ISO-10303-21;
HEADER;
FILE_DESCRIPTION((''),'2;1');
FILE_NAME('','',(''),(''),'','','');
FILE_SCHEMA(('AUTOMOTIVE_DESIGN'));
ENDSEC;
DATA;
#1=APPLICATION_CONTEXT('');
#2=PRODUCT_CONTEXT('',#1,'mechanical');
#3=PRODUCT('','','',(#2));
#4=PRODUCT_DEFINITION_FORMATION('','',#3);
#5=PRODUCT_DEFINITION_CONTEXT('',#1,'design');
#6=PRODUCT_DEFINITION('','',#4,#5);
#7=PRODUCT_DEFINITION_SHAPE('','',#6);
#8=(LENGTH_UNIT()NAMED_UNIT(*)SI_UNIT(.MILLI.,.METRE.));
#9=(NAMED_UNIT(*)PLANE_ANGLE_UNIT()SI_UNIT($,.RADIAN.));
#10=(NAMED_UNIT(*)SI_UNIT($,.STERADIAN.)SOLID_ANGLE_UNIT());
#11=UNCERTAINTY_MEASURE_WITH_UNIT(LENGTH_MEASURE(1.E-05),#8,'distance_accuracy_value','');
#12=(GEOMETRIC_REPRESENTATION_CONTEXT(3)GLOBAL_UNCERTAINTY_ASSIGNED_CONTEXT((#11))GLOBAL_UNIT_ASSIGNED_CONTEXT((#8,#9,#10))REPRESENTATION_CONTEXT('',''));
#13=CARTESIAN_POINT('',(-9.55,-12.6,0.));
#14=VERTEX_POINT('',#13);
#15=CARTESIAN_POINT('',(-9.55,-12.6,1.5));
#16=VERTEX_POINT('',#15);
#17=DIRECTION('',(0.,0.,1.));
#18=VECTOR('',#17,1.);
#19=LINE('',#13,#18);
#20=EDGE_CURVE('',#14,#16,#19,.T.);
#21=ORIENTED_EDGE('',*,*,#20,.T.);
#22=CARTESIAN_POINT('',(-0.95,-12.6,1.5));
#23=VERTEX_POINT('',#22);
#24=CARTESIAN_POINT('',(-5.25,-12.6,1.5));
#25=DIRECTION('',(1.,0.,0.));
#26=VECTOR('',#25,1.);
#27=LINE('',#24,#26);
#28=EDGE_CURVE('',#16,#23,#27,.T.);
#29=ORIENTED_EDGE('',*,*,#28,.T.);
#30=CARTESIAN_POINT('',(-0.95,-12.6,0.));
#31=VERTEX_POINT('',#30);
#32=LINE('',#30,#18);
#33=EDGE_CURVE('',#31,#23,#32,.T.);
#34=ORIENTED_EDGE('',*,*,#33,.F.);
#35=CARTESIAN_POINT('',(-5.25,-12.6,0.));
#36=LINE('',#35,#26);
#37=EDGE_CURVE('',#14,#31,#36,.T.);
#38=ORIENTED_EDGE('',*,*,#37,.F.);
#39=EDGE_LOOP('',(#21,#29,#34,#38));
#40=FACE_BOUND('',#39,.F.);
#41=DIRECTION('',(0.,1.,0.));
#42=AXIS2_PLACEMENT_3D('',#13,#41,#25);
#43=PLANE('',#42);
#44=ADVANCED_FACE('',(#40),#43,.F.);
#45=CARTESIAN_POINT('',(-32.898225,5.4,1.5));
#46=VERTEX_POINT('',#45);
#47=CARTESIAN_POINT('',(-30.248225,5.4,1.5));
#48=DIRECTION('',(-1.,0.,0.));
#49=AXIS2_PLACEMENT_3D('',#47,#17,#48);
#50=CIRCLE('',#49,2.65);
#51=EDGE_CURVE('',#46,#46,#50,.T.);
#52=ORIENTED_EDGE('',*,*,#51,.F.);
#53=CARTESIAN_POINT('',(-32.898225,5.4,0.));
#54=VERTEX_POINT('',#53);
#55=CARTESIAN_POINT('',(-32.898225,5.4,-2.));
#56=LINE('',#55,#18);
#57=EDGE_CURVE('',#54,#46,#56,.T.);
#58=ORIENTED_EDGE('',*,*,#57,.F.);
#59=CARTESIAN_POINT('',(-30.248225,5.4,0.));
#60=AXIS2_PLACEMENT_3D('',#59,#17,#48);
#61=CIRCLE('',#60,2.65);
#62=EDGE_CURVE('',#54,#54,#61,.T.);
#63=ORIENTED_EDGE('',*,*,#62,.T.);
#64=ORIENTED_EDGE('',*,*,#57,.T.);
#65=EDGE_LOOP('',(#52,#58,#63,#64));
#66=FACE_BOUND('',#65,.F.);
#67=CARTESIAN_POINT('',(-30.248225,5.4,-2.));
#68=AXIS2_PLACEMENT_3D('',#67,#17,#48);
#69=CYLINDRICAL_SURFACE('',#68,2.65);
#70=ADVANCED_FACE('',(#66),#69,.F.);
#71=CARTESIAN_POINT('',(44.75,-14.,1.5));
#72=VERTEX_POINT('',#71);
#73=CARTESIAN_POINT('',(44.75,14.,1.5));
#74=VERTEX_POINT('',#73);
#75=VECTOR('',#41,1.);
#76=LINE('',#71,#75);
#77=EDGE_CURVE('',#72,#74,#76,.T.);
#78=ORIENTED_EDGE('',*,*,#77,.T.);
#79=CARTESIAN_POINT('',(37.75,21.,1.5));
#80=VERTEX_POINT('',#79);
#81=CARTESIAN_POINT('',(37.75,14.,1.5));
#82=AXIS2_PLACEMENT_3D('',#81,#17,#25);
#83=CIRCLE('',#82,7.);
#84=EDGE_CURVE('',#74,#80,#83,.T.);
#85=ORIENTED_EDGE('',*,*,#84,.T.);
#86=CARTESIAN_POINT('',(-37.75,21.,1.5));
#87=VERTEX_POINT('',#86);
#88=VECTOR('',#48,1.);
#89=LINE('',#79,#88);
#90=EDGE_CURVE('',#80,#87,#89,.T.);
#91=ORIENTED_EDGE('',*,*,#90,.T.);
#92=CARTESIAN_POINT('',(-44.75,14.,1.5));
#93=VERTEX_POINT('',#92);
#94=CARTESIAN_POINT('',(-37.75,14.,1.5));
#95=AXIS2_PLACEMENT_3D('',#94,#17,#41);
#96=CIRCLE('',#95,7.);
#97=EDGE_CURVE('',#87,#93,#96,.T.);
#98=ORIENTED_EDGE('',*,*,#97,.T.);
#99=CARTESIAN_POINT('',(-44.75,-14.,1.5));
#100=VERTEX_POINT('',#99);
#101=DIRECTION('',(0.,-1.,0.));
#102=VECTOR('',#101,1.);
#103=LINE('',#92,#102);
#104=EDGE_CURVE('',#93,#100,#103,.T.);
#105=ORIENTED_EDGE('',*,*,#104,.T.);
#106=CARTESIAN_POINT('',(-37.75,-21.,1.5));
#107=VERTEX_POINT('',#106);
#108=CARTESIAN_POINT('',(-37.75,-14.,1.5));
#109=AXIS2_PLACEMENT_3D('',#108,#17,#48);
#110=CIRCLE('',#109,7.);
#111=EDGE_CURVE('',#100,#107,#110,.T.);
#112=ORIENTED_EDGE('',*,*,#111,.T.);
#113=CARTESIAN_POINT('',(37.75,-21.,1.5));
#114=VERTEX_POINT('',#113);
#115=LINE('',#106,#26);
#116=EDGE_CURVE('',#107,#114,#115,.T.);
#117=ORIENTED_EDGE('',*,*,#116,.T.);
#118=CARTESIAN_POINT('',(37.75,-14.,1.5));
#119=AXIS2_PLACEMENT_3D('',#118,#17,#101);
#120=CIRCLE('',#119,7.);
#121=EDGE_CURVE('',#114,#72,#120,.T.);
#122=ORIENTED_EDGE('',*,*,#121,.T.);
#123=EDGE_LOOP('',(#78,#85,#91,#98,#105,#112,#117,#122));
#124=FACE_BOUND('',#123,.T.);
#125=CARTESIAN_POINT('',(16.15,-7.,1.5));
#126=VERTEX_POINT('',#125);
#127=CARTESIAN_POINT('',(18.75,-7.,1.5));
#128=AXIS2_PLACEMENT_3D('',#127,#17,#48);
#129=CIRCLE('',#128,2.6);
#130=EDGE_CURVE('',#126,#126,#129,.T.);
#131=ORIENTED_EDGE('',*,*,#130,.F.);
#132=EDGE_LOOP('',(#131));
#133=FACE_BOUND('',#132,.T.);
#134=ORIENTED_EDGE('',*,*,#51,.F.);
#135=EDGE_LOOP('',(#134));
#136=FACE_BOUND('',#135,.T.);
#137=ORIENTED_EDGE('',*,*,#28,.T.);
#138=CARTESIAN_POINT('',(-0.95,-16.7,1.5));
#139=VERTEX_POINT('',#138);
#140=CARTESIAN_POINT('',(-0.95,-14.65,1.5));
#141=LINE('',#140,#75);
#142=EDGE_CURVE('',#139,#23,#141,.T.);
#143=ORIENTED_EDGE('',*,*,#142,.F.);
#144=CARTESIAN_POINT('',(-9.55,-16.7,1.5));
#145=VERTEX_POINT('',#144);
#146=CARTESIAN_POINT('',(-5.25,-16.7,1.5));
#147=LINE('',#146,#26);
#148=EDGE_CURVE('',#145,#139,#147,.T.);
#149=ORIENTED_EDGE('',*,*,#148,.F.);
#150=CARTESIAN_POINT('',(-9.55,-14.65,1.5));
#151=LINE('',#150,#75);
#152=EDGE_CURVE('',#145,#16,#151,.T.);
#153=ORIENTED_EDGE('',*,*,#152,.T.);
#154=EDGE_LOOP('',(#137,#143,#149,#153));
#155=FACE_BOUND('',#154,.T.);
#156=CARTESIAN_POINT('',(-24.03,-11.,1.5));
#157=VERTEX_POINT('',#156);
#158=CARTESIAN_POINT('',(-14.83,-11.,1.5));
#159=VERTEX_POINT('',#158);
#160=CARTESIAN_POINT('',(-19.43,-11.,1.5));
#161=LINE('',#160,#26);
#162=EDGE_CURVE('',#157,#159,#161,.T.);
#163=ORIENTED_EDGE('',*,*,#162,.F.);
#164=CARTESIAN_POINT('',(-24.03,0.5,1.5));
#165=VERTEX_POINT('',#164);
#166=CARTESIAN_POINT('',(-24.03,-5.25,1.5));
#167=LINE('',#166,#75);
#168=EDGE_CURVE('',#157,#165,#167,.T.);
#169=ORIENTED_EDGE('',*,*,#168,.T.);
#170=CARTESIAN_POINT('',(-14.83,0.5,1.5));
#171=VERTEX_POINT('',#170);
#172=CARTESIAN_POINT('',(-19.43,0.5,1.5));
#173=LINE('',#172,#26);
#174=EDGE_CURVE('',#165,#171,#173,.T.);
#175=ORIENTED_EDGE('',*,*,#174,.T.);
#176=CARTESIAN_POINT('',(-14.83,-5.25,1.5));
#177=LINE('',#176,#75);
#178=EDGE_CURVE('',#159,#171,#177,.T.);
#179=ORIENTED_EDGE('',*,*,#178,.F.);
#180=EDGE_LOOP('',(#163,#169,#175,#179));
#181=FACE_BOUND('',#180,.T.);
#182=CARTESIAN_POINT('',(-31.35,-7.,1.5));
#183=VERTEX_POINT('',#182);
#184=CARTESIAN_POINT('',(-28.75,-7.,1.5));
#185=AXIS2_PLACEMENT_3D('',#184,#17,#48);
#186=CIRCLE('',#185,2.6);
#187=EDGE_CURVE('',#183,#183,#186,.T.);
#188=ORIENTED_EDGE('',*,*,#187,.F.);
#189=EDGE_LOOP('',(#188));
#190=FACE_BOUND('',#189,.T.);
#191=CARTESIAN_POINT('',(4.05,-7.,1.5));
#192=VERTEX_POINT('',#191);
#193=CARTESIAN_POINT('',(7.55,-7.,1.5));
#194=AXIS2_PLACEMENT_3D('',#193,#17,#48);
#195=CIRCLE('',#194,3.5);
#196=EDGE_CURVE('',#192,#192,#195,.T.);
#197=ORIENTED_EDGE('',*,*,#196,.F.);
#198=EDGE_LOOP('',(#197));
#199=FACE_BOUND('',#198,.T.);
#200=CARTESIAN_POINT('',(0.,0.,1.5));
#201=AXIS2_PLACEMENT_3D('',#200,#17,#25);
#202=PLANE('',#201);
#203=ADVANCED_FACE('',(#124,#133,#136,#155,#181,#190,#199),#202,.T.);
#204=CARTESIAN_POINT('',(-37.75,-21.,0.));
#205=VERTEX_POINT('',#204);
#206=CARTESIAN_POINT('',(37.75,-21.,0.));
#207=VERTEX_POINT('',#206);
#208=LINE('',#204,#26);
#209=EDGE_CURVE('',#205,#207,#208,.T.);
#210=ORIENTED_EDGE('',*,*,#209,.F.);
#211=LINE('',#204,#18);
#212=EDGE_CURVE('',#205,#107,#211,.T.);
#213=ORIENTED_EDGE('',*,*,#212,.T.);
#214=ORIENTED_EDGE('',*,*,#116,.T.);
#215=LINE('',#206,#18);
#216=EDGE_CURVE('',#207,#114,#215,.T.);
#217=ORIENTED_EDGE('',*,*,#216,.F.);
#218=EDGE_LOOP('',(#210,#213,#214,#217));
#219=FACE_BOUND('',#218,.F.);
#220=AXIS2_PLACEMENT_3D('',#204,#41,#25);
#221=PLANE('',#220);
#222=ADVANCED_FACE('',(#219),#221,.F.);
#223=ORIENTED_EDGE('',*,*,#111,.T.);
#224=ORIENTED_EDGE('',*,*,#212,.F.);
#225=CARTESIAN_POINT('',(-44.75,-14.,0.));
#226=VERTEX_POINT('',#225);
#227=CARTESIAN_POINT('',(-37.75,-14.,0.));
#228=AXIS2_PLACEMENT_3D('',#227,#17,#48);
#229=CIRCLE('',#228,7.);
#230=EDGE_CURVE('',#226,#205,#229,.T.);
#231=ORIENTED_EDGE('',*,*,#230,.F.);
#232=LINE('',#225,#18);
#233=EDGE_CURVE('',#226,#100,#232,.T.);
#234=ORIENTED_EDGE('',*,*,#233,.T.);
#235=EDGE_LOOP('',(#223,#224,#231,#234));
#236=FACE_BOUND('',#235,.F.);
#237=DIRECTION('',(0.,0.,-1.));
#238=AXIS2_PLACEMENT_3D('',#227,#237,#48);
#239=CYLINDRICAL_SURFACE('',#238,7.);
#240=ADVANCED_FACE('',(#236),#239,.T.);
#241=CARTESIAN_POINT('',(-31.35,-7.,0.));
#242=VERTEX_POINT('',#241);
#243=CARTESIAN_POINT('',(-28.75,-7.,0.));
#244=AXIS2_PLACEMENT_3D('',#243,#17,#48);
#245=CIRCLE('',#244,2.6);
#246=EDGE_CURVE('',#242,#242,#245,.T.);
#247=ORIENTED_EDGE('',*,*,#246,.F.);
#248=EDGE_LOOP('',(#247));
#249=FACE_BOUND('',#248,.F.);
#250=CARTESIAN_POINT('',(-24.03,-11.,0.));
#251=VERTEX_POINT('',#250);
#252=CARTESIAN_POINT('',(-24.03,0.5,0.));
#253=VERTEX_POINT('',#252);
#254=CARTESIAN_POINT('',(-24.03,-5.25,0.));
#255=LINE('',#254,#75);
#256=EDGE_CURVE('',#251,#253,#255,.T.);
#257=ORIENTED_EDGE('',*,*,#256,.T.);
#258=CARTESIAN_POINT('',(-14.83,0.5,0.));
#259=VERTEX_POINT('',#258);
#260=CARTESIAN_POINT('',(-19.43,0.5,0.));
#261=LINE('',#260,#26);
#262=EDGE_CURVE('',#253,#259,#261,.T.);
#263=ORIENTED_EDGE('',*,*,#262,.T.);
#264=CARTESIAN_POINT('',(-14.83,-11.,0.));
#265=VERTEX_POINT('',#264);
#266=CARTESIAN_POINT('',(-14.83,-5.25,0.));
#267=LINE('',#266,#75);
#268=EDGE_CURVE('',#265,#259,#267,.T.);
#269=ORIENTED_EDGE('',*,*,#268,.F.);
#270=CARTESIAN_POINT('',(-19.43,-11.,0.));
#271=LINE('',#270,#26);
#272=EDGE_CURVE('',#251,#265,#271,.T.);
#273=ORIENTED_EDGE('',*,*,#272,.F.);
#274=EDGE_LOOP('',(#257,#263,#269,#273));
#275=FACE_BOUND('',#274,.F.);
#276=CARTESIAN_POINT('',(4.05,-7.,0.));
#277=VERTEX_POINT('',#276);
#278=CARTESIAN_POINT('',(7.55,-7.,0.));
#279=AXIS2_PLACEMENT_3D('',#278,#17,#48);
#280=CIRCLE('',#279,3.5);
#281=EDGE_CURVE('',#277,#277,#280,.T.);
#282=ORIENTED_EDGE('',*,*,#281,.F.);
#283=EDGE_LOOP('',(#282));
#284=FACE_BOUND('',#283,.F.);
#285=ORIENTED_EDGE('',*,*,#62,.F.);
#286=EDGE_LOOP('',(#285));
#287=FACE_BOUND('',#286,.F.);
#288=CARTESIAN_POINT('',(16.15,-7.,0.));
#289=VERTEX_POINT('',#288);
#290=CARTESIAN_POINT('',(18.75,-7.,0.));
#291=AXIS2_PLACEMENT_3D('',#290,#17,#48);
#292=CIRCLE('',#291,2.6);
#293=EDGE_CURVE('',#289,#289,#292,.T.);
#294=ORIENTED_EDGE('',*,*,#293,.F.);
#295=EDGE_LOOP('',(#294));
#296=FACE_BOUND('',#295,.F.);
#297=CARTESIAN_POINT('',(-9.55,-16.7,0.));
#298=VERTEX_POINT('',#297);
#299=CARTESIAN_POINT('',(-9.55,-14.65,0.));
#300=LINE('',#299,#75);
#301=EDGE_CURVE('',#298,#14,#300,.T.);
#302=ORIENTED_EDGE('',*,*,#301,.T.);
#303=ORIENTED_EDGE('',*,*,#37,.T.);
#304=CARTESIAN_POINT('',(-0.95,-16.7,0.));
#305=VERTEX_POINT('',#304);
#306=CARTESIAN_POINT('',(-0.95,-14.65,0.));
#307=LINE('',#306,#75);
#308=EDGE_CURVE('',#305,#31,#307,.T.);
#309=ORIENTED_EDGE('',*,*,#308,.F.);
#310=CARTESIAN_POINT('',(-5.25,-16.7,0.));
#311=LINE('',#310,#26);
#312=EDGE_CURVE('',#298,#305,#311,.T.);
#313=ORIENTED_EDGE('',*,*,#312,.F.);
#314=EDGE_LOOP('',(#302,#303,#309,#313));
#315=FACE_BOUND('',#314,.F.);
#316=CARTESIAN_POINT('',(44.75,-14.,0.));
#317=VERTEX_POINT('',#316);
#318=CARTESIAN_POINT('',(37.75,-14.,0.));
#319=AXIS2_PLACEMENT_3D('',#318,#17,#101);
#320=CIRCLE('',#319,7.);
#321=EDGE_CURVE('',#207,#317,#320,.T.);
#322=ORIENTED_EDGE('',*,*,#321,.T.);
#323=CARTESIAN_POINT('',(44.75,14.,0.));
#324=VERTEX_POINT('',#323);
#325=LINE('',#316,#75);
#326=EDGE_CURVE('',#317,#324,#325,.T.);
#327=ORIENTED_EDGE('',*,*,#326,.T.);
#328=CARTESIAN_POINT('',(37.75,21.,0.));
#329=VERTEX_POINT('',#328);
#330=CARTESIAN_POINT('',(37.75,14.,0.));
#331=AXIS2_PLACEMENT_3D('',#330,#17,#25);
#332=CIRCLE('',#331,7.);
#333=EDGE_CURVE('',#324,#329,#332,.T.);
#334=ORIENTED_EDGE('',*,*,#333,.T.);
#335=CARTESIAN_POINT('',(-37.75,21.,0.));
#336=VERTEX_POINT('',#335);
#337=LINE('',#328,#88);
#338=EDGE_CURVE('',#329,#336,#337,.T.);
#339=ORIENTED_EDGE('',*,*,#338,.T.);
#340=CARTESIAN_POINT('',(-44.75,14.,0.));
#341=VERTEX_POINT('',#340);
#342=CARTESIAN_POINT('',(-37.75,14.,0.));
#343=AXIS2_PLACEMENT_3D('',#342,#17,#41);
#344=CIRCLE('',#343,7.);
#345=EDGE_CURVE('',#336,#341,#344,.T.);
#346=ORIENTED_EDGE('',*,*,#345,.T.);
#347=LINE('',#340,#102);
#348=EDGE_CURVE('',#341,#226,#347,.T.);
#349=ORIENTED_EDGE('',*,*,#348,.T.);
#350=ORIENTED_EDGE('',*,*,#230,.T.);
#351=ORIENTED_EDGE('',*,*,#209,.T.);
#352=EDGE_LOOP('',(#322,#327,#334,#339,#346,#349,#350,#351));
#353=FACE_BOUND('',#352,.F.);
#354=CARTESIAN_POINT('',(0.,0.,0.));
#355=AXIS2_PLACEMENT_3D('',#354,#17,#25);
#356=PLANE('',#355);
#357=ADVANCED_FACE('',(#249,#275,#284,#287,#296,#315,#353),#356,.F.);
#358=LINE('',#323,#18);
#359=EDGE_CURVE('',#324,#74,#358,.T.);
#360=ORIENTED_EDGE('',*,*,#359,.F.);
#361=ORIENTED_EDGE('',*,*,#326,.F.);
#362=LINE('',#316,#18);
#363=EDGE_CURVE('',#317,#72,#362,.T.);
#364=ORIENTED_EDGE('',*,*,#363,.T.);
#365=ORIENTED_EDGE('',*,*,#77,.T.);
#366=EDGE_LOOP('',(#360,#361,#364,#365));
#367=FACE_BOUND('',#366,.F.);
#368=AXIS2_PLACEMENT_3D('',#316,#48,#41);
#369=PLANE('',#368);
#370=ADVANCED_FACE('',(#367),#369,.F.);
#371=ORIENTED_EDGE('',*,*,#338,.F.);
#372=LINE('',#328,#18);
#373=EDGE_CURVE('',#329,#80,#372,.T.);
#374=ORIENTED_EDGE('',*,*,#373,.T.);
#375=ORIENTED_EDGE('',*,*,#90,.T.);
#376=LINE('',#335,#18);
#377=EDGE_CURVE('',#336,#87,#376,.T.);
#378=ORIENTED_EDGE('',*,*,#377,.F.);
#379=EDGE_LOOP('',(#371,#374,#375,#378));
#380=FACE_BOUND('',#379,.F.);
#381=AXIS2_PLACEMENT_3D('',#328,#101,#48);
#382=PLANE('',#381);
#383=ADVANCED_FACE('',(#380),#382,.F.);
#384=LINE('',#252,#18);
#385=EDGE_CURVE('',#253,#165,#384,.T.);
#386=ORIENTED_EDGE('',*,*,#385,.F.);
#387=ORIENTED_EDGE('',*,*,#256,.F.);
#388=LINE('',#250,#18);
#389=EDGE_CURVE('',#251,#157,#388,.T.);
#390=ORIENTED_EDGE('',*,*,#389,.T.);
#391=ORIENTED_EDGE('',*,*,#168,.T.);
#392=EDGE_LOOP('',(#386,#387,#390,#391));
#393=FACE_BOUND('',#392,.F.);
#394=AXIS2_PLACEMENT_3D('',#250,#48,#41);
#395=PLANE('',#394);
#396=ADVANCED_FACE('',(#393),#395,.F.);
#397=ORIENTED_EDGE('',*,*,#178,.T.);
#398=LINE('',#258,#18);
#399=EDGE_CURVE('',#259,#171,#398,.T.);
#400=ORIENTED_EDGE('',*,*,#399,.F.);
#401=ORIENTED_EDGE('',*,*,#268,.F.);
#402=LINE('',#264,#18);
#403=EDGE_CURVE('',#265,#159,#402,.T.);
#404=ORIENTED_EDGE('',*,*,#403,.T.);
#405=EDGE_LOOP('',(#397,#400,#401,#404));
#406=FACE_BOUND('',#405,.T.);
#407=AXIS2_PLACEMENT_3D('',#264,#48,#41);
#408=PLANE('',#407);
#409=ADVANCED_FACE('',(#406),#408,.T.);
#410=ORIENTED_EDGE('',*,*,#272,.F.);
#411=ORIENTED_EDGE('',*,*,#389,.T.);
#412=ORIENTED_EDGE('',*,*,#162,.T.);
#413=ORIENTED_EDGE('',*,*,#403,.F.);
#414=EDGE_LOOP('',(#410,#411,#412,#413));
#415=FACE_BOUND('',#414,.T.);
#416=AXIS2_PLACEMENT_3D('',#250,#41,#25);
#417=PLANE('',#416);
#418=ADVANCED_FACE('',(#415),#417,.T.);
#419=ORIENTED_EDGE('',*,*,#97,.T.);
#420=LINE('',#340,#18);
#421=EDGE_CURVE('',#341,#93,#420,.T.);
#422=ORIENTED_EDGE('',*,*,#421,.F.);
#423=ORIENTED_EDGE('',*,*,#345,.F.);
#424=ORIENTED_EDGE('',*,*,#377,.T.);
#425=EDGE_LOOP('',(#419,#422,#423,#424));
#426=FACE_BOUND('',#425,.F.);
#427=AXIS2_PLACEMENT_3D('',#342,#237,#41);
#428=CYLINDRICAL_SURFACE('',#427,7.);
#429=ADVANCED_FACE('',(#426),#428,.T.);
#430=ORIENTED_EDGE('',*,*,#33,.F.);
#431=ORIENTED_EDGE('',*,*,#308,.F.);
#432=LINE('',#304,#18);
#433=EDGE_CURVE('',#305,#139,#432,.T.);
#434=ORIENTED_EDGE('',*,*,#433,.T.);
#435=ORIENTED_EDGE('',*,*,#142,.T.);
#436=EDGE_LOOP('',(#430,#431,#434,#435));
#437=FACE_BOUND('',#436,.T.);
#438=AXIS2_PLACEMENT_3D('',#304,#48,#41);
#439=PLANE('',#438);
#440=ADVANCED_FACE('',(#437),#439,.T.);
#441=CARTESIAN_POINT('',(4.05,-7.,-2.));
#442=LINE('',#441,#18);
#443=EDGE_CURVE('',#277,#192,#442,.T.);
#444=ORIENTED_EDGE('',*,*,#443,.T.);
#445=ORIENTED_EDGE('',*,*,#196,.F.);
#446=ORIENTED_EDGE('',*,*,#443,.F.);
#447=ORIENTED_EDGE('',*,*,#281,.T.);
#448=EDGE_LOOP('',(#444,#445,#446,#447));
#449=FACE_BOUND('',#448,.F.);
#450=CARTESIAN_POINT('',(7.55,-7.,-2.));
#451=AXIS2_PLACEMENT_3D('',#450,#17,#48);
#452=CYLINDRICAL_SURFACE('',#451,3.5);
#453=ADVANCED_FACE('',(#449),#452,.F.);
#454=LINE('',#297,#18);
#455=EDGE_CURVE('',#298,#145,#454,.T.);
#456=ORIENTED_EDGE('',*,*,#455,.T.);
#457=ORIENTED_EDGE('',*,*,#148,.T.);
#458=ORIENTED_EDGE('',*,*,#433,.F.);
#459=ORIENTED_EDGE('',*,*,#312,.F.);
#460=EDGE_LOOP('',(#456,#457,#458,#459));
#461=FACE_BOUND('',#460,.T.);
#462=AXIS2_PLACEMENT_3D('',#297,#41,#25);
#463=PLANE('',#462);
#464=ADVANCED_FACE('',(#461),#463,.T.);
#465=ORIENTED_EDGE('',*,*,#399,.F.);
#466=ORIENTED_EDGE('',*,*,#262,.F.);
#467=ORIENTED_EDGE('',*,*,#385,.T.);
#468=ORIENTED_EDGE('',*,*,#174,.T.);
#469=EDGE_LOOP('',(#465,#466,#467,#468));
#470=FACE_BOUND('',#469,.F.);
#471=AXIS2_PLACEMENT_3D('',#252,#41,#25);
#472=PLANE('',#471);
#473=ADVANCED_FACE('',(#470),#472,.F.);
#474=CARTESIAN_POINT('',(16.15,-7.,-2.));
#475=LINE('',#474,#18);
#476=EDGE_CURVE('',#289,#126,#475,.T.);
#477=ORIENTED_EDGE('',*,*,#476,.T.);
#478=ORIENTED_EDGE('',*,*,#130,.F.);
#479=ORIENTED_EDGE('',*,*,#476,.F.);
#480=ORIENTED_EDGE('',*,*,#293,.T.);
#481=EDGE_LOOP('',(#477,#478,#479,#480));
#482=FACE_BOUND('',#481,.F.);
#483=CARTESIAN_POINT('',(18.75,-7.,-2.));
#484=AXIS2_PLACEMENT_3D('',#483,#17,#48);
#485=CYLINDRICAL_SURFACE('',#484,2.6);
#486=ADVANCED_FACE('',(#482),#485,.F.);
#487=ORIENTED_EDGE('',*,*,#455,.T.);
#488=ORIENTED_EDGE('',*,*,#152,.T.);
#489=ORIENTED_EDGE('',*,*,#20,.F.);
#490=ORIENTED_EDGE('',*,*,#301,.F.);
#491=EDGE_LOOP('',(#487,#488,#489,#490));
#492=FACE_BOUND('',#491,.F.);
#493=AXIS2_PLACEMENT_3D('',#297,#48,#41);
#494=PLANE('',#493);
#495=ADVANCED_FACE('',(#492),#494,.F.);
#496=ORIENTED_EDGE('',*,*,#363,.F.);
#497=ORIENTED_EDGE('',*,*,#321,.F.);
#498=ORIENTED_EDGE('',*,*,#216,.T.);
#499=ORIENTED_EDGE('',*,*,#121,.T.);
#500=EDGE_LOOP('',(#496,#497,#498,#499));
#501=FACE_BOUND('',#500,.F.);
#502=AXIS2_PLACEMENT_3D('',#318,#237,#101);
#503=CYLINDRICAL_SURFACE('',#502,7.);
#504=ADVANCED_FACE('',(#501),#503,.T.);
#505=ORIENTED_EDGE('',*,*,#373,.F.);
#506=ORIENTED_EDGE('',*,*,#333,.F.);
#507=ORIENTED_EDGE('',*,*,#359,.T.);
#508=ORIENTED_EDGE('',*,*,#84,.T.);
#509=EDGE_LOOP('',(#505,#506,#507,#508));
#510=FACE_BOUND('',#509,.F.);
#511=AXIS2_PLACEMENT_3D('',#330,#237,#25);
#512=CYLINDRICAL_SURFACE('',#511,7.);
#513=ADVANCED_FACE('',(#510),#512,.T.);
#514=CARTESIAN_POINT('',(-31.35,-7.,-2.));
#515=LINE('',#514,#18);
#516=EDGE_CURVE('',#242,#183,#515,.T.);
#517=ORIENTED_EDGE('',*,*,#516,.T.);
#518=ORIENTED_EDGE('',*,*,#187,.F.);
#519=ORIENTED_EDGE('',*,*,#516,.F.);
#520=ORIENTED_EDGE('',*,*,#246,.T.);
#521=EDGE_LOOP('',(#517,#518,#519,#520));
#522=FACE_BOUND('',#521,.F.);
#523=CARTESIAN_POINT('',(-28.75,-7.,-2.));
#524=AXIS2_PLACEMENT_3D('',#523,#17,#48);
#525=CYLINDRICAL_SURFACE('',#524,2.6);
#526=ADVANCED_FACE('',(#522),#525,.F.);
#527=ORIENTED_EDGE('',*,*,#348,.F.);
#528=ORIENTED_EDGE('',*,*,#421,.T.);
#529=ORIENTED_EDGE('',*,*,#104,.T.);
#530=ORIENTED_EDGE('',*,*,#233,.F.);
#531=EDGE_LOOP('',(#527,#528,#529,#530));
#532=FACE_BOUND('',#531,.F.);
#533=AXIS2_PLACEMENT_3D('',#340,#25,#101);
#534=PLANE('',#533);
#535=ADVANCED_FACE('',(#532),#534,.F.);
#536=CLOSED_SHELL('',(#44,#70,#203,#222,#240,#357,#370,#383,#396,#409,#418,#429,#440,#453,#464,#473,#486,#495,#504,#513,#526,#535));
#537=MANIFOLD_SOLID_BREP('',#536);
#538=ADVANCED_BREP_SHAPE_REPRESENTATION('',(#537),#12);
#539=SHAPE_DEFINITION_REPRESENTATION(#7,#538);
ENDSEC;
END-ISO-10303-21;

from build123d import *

# Parameters (mm, degrees)
F0_W     = 8.6
F0_H     = 4.1
F0_W_2   = 9.2
F0_H_2   = 11.5
F1_DEPTH = 1.5
F2_D     = 5.2
F2_DEPTH = 2
F2_TIP   = 1.5622376095
F3_D     = 7
F3_DEPTH = 2
F3_TIP   = 2.1030121666
F4_D     = 5.3
F4_DEPTH = 2
F4_TIP   = 1.5922806404


# Not quite as in the source:
# - a feature names something its author has since deleted; it is built from what else it names


with BuildPart() as f1:
    # F0 (on Top) → F1 (new body)
    with BuildSketch(Plane.XY):
        with BuildLine():
            Line((-37.75, -21), (37.75, -21))
            ThreePointArc((37.75, -21), (42.6997474683, -18.9497474683), (44.75, -14))
            Line((44.75, -14), (44.75, 14))
            ThreePointArc((44.75, 14), (42.6997474683, 18.9497474683), (37.75, 21))
            Line((37.75, 21), (-37.75, 21))
            ThreePointArc((-37.75, 21), (-42.6997474683, 18.9497474683), (-44.75, 14))
            Line((-44.75, 14), (-44.75, -14))
            ThreePointArc((-44.75, -14), (-42.6997474683, -18.9497474683), (-37.75, -21))
        make_face()
        with Locations((-5.25, -14.65)):
            Rectangle(F0_W, F0_H, mode=Mode.SUBTRACT)
        with Locations((-19.43, -5.25)):
            Rectangle(F0_W_2, F0_H_2, mode=Mode.SUBTRACT)
    extrude(amount=F1_DEPTH)

    # F2
    with Locations(Plane(origin=(0, 0, 0), x_dir=(1, 0, 0), z_dir=(0, 0, -1))):
        with Locations((18.75, 7), (-28.75, 7)):
            Hole(F2_D / 2, depth=F2_DEPTH)
            with Locations((0, 0, -(F2_DEPTH + F2_TIP / 2))):  # 118° drill point
                Cone(0, F2_D / 2, F2_TIP, mode=Mode.SUBTRACT)

    # F3
    with Locations(Plane(origin=(0, 0, 0), x_dir=(1, 0, 0), z_dir=(0, 0, -1))):
        with Locations((7.55, 7)):
            Hole(F3_D / 2, depth=F3_DEPTH)
            with Locations((0, 0, -(F3_DEPTH + F3_TIP / 2))):  # 118° drill point
                Cone(0, F3_D / 2, F3_TIP, mode=Mode.SUBTRACT)

    # F4
    with Locations(Plane(origin=(0, 0, 0), x_dir=(1, 0, 0), z_dir=(0, 0, -1))):
        with Locations((-30.2482247353, -5.4)):
            Hole(F4_D / 2, depth=F4_DEPTH)
            with Locations((0, 0, -(F4_DEPTH + F4_TIP / 2))):  # 118° drill point
                Cone(0, F4_D / 2, F4_TIP, mode=Mode.SUBTRACT)


solid = f1.part
